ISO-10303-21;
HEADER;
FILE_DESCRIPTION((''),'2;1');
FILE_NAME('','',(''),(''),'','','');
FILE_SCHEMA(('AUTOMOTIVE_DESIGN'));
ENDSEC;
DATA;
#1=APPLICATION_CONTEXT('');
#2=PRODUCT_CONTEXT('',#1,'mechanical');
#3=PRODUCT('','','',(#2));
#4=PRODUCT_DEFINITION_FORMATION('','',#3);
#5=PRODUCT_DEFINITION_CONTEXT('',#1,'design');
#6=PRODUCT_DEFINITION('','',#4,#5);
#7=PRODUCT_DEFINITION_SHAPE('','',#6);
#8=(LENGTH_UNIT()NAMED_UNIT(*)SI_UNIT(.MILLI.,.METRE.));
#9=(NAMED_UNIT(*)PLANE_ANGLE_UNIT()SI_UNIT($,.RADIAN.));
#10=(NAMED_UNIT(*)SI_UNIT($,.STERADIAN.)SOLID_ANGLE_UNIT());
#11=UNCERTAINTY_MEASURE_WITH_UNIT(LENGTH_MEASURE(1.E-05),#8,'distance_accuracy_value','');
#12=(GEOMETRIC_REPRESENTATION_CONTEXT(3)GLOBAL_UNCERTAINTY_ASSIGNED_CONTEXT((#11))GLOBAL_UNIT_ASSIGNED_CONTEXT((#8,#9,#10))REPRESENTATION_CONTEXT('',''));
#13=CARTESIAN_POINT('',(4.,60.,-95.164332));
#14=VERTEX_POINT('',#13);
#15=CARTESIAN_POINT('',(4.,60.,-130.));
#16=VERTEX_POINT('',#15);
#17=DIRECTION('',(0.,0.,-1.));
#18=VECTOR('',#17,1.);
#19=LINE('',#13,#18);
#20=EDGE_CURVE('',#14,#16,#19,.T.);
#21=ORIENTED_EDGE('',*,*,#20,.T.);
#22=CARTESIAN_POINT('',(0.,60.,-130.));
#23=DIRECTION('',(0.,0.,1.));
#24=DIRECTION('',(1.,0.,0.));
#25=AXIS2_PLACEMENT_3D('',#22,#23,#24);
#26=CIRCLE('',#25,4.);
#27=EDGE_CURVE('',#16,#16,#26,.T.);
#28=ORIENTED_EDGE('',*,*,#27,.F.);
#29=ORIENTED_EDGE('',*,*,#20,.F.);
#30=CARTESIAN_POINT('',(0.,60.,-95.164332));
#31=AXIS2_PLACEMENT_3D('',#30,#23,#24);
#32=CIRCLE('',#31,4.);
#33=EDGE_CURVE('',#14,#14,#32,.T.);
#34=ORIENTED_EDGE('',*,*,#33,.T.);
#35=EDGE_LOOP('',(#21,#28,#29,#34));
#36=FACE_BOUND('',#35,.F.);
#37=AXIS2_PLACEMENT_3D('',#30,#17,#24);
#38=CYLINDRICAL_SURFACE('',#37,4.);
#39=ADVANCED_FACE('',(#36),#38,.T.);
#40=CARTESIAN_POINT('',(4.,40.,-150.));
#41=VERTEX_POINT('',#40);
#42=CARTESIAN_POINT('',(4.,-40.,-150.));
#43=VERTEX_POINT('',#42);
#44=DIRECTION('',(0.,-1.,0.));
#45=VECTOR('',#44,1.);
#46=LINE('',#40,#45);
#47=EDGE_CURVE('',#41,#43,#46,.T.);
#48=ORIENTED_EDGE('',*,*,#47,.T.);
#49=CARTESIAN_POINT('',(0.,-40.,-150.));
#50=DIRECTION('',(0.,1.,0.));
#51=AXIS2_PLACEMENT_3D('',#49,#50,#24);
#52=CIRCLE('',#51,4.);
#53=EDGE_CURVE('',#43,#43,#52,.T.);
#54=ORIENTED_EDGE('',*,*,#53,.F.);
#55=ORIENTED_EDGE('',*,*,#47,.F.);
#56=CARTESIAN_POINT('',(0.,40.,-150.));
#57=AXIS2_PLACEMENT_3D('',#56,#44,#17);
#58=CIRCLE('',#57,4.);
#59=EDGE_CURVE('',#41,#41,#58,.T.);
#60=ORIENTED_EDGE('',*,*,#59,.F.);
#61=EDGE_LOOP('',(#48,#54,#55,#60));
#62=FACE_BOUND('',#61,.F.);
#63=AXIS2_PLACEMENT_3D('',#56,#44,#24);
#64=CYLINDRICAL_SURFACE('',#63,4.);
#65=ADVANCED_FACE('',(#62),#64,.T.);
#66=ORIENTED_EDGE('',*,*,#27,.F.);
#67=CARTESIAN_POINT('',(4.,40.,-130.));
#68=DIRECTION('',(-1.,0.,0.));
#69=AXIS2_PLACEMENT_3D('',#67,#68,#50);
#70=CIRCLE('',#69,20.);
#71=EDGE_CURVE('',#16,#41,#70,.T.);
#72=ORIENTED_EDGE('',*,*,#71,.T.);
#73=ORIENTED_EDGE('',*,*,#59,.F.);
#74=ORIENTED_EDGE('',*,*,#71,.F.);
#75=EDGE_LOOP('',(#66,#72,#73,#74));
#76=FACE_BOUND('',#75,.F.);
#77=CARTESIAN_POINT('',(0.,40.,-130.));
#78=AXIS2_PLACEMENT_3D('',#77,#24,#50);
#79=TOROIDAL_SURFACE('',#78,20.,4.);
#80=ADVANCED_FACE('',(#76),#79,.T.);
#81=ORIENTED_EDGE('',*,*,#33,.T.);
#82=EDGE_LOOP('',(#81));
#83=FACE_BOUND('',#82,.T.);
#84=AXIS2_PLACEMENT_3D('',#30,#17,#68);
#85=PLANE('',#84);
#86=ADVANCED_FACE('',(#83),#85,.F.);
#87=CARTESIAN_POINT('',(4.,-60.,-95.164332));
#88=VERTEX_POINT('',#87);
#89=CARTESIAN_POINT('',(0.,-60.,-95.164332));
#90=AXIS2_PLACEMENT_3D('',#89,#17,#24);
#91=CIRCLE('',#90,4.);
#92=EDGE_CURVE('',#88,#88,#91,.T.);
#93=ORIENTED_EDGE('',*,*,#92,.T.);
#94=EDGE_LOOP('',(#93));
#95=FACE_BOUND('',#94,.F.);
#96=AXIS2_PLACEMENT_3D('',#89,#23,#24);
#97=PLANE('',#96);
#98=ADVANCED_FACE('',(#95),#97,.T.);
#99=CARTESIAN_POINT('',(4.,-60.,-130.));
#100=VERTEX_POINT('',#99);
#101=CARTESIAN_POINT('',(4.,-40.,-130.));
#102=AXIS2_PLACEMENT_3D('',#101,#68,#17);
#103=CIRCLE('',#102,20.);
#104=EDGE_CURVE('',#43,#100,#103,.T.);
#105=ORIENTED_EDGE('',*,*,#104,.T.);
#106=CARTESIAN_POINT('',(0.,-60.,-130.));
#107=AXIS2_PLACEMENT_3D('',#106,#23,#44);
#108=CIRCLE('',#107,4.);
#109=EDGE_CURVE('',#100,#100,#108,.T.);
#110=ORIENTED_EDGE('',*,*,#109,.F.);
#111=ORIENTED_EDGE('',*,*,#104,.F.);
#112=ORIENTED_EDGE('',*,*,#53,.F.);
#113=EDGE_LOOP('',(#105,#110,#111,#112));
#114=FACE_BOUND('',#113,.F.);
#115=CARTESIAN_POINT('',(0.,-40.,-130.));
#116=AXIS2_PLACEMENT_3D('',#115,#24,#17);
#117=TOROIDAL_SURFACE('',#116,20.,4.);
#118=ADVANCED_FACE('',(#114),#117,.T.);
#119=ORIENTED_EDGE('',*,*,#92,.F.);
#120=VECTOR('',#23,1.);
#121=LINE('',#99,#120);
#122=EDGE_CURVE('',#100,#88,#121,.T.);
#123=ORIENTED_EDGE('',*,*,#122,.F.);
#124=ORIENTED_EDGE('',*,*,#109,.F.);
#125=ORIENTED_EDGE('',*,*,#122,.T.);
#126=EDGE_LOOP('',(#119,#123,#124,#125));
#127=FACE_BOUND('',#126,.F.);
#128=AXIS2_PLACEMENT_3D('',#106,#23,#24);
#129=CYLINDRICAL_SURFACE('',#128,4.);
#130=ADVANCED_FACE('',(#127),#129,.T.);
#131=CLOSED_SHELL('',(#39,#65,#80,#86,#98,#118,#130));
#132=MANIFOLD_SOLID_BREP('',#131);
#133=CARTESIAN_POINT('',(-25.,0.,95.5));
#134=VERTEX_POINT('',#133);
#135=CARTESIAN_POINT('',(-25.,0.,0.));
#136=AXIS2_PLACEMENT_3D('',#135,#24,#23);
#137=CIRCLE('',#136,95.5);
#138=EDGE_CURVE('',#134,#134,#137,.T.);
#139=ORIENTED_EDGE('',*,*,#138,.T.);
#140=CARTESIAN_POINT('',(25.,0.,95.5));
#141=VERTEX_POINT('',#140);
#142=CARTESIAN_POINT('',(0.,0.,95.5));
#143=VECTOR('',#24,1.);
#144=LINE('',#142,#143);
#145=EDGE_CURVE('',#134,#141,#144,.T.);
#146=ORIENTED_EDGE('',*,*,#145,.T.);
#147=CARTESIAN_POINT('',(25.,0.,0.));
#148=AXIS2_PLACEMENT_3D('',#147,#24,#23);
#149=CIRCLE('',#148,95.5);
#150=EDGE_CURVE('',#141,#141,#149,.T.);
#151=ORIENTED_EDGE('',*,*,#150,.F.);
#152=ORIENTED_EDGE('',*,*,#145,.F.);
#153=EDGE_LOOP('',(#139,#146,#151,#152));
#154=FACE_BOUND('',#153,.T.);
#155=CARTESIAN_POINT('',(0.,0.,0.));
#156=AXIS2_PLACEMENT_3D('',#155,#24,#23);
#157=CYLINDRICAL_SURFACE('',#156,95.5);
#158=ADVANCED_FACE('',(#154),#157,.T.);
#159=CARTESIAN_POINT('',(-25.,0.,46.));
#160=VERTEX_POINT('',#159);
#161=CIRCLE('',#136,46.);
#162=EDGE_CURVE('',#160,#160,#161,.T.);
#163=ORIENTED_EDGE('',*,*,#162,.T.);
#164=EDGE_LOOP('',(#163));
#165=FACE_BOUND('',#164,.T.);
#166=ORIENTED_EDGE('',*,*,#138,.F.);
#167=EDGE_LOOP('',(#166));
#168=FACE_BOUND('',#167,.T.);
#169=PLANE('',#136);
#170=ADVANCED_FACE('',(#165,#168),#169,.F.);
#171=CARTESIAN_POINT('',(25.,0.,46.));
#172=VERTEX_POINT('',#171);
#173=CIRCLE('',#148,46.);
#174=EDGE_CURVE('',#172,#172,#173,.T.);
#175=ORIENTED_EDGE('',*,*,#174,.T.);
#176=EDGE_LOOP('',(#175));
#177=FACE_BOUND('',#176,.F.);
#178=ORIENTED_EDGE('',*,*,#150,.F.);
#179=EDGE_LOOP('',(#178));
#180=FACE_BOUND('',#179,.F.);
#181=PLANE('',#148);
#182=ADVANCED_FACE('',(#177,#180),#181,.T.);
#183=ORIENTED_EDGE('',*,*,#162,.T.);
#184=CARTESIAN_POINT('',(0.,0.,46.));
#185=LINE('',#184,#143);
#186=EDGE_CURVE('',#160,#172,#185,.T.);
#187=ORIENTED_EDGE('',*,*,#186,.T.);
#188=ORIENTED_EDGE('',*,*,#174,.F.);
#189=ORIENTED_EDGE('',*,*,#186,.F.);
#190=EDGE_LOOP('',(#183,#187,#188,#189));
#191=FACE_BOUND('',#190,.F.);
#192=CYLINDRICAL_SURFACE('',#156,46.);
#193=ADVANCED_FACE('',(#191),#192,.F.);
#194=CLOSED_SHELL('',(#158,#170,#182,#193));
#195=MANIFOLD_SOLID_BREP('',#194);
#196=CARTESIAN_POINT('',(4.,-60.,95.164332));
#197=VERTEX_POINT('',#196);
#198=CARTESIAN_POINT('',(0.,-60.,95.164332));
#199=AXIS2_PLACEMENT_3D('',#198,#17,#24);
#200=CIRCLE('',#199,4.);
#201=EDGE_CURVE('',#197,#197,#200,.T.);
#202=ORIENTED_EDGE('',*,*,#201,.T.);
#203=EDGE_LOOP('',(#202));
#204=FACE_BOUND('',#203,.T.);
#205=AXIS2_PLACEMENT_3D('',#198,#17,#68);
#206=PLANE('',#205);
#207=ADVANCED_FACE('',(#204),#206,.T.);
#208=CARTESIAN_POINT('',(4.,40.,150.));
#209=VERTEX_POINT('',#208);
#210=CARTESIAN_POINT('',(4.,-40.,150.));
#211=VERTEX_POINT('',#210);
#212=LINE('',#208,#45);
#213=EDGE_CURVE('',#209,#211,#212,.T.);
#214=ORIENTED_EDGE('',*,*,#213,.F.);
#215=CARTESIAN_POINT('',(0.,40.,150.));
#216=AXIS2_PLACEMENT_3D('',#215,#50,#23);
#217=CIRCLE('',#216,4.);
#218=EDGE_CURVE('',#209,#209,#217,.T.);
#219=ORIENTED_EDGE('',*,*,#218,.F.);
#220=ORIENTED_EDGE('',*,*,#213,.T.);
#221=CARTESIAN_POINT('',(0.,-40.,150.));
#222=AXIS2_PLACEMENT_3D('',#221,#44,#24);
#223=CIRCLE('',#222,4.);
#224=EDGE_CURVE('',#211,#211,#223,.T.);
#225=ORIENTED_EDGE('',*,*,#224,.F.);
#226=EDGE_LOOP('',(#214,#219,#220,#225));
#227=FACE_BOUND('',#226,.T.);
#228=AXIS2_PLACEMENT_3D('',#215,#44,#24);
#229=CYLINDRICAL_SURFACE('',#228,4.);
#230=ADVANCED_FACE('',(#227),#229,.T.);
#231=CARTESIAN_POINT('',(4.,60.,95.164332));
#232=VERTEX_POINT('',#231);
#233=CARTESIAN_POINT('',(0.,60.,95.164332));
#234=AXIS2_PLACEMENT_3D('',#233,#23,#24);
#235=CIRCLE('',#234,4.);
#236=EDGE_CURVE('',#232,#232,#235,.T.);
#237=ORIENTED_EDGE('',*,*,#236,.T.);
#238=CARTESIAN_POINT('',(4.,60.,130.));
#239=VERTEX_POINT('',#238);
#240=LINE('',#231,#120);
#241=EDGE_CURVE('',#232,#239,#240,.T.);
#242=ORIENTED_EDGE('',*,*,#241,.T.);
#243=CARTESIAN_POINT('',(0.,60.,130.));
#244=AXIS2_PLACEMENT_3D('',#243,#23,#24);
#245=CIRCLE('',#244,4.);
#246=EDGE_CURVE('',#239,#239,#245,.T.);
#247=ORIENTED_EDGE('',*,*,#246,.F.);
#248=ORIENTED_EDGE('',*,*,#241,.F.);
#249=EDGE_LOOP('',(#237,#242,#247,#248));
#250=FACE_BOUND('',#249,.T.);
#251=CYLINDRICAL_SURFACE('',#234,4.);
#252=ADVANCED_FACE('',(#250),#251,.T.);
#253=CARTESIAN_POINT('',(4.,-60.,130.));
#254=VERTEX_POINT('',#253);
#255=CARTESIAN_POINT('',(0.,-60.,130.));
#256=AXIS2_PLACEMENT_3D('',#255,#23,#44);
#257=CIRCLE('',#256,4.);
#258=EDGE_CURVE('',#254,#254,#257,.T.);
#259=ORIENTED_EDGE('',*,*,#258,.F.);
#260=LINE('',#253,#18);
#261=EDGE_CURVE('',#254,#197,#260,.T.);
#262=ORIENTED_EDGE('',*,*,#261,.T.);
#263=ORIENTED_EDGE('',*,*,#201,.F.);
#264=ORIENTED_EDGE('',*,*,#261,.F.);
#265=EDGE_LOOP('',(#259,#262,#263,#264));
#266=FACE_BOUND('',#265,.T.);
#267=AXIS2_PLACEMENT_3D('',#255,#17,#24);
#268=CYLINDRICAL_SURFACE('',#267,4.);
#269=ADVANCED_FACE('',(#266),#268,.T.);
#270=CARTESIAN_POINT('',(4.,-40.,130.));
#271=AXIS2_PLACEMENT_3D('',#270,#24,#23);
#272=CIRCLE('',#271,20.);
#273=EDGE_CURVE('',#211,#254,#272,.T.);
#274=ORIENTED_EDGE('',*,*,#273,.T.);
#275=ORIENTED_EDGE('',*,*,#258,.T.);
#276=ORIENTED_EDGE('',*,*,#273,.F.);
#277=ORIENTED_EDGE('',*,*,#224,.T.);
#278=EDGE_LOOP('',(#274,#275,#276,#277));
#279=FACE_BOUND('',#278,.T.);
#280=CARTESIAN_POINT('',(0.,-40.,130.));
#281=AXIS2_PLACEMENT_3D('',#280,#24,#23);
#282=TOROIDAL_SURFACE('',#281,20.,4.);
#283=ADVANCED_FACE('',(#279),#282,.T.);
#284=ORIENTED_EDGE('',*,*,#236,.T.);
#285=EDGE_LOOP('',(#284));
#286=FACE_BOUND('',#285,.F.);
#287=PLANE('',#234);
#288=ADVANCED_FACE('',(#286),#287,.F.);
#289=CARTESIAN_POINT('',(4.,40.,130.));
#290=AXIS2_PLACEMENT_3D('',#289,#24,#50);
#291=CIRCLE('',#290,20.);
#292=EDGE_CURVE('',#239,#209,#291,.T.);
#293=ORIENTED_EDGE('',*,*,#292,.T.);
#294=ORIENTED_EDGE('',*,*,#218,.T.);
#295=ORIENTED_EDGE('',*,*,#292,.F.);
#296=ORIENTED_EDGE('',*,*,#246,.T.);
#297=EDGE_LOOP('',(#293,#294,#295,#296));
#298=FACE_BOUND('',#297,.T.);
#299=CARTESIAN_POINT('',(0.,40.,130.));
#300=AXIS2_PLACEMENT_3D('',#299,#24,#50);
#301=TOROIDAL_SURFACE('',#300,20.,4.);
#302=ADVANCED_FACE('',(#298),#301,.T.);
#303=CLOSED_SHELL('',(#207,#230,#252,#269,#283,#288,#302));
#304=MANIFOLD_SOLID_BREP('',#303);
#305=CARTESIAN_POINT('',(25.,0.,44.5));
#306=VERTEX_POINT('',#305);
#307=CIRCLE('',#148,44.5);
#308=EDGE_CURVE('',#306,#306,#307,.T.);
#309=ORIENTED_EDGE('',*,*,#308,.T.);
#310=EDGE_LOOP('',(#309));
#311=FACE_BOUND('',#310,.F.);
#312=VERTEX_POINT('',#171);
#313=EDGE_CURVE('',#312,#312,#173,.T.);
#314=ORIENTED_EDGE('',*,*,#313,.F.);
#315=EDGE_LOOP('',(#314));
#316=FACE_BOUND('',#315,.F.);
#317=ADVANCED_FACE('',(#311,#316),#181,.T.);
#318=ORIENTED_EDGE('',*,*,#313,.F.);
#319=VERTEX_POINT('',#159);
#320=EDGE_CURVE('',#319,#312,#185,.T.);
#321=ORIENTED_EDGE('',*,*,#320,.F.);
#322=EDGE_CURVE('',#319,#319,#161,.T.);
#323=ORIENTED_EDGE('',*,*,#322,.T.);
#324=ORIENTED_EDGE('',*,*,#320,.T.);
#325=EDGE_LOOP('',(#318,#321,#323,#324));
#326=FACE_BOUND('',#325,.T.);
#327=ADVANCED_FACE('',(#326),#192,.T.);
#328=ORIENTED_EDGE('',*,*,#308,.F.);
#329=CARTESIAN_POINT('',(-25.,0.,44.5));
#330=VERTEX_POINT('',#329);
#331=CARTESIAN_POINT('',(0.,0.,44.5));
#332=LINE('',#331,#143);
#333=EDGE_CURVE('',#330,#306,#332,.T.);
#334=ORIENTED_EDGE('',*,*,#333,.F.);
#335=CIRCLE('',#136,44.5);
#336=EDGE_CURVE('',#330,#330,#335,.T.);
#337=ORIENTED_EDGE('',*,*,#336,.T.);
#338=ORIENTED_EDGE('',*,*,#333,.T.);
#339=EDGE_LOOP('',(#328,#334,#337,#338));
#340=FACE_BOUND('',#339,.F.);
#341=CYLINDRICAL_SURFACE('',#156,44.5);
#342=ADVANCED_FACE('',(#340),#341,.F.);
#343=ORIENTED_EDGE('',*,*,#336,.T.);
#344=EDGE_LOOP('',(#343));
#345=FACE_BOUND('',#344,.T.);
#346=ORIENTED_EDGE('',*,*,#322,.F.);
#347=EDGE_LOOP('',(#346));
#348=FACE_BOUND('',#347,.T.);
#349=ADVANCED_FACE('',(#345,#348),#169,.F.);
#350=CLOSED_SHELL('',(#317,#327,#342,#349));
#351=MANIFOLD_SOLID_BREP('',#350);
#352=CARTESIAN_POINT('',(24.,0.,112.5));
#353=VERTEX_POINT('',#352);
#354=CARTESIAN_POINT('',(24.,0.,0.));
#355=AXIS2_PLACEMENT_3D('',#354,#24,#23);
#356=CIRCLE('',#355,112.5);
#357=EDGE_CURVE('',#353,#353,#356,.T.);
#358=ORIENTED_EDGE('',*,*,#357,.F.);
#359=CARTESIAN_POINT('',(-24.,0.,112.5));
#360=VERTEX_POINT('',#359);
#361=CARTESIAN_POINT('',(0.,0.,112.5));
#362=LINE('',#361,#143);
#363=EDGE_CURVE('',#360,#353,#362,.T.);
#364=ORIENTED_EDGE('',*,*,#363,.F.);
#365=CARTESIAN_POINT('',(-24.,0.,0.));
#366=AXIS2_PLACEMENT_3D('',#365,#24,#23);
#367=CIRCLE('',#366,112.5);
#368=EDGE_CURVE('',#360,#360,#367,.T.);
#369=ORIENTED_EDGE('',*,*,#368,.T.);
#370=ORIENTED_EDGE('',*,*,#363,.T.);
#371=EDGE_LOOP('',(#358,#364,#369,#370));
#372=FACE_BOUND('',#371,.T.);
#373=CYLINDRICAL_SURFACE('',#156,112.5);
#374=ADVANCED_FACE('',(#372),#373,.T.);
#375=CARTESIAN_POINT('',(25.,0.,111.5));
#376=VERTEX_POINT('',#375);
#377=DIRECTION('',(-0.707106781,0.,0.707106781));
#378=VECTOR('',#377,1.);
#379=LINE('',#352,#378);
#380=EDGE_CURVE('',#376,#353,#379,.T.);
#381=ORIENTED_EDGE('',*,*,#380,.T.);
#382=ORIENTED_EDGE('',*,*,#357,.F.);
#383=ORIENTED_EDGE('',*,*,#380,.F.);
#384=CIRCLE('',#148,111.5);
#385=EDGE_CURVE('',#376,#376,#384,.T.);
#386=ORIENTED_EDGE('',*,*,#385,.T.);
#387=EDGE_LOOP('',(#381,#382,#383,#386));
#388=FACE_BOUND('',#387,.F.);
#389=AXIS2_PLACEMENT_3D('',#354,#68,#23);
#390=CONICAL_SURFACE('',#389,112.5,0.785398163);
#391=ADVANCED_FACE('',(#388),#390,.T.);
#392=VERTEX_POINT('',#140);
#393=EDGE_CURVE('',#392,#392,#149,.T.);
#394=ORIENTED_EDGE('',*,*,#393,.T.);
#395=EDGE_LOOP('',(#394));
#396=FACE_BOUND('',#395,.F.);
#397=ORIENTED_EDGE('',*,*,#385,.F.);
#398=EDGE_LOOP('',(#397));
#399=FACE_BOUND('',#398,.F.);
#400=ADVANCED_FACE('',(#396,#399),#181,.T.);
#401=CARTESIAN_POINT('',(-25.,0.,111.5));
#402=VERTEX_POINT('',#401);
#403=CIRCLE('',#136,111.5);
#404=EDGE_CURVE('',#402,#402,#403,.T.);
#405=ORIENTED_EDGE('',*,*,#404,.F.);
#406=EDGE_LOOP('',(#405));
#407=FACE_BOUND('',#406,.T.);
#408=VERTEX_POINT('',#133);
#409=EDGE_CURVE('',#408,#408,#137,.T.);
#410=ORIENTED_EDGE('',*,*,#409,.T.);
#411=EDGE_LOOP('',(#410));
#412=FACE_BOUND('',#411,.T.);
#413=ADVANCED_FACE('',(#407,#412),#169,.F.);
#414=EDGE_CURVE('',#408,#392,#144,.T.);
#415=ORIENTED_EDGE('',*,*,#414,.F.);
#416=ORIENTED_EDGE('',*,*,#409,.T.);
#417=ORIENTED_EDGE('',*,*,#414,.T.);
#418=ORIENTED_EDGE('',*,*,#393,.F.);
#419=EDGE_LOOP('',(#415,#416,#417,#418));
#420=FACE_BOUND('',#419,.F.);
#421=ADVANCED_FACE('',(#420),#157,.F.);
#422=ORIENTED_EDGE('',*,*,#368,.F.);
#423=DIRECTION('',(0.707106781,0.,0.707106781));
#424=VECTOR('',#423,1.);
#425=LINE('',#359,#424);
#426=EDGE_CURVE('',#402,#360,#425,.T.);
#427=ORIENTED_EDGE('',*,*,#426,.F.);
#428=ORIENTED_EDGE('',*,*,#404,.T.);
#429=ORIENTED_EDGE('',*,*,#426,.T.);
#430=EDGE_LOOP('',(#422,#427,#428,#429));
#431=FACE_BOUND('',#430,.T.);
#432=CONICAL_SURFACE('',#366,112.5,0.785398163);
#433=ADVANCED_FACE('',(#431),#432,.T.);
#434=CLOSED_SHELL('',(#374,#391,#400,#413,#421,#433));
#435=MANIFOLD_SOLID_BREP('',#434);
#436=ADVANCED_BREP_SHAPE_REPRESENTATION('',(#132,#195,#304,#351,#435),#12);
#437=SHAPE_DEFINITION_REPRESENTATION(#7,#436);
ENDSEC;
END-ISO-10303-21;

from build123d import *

# Parameters (mm, degrees)
F0_W     = 50
F0_H     = 1.5
F2_W     = 50
F2_H     = 49.5
F3_W     = 50
F3_H     = 17
F8_R     = 4
F10_SIZE = 1


# Not quite as in the source:
# - a pattern or mirror of a feature is missing from the dataset's text; its kind, count and spacing are read off the source's solid


with BuildPart() as f1:
    # F0 (on Front) → F1 (revolve)
    with BuildSketch(Plane.XZ):
        with Locations((0, 45.25)):
            Rectangle(F0_W, F0_H)
    revolve(axis=Axis((-0.9286299391, 0, 0), (1, 0, 0)))


with BuildPart() as f4:
    # F2 (on Front) → F4 (revolve)
    with BuildSketch(Plane.XZ):
        with Locations((0, 70.75)):
            Rectangle(F2_W, F2_H)
    revolve(axis=Axis((5.5879e-06, 0, 0), (1, 0, 0)))


with BuildPart() as f5:
    # F3 (on Front) → F5 (revolve)
    with BuildSketch(Plane.XZ):
        with Locations((0, 104)):
            Rectangle(F3_W, F3_H)
    revolve(axis=Axis((-0.9286299391, 0, 0), (1, 0, 0)))

    # F10
    f10_edges = [f5.edges().sort_by_distance(p)[0] for p in [
        (25, 0, -112.5),
        (-25, 0, -112.5),
    ]]
    chamfer(f10_edges, length=F10_SIZE)


with BuildPart() as f9:
    # F9: sweep along a path in F6
    with BuildLine(Plane.YZ) as f9_path:
        Line((60, 95.1643315534), (60, 130))
        ThreePointArc((60, 130), (54.1421356237, 144.1421356237), (40, 150))
        Line((40, 150), (-40, 150))
        ThreePointArc((-40, 150), (-54.1421356237, 144.1421356237), (-60, 130))
        Line((-60, 130), (-60, 95.1643315534))
    # F8 (on plane+point) → F9 (sweep)
    with BuildSketch(Plane.XY.offset(95.1643315534)):
        with Locations((0, 60)):
            Circle(F8_R)
    sweep(path=f9_path.line)


with BuildPart() as f9_copies_1:
    # F9_copies: instance of F9
    add(f9.part.mirror(Plane(origin=(0, 0, 0), x_dir=(-1, 0, 0), z_dir=(0, 0, -1))))


solid = Compound([f1.part, f4.part, f5.part, f9.part, f9_copies_1.part])
